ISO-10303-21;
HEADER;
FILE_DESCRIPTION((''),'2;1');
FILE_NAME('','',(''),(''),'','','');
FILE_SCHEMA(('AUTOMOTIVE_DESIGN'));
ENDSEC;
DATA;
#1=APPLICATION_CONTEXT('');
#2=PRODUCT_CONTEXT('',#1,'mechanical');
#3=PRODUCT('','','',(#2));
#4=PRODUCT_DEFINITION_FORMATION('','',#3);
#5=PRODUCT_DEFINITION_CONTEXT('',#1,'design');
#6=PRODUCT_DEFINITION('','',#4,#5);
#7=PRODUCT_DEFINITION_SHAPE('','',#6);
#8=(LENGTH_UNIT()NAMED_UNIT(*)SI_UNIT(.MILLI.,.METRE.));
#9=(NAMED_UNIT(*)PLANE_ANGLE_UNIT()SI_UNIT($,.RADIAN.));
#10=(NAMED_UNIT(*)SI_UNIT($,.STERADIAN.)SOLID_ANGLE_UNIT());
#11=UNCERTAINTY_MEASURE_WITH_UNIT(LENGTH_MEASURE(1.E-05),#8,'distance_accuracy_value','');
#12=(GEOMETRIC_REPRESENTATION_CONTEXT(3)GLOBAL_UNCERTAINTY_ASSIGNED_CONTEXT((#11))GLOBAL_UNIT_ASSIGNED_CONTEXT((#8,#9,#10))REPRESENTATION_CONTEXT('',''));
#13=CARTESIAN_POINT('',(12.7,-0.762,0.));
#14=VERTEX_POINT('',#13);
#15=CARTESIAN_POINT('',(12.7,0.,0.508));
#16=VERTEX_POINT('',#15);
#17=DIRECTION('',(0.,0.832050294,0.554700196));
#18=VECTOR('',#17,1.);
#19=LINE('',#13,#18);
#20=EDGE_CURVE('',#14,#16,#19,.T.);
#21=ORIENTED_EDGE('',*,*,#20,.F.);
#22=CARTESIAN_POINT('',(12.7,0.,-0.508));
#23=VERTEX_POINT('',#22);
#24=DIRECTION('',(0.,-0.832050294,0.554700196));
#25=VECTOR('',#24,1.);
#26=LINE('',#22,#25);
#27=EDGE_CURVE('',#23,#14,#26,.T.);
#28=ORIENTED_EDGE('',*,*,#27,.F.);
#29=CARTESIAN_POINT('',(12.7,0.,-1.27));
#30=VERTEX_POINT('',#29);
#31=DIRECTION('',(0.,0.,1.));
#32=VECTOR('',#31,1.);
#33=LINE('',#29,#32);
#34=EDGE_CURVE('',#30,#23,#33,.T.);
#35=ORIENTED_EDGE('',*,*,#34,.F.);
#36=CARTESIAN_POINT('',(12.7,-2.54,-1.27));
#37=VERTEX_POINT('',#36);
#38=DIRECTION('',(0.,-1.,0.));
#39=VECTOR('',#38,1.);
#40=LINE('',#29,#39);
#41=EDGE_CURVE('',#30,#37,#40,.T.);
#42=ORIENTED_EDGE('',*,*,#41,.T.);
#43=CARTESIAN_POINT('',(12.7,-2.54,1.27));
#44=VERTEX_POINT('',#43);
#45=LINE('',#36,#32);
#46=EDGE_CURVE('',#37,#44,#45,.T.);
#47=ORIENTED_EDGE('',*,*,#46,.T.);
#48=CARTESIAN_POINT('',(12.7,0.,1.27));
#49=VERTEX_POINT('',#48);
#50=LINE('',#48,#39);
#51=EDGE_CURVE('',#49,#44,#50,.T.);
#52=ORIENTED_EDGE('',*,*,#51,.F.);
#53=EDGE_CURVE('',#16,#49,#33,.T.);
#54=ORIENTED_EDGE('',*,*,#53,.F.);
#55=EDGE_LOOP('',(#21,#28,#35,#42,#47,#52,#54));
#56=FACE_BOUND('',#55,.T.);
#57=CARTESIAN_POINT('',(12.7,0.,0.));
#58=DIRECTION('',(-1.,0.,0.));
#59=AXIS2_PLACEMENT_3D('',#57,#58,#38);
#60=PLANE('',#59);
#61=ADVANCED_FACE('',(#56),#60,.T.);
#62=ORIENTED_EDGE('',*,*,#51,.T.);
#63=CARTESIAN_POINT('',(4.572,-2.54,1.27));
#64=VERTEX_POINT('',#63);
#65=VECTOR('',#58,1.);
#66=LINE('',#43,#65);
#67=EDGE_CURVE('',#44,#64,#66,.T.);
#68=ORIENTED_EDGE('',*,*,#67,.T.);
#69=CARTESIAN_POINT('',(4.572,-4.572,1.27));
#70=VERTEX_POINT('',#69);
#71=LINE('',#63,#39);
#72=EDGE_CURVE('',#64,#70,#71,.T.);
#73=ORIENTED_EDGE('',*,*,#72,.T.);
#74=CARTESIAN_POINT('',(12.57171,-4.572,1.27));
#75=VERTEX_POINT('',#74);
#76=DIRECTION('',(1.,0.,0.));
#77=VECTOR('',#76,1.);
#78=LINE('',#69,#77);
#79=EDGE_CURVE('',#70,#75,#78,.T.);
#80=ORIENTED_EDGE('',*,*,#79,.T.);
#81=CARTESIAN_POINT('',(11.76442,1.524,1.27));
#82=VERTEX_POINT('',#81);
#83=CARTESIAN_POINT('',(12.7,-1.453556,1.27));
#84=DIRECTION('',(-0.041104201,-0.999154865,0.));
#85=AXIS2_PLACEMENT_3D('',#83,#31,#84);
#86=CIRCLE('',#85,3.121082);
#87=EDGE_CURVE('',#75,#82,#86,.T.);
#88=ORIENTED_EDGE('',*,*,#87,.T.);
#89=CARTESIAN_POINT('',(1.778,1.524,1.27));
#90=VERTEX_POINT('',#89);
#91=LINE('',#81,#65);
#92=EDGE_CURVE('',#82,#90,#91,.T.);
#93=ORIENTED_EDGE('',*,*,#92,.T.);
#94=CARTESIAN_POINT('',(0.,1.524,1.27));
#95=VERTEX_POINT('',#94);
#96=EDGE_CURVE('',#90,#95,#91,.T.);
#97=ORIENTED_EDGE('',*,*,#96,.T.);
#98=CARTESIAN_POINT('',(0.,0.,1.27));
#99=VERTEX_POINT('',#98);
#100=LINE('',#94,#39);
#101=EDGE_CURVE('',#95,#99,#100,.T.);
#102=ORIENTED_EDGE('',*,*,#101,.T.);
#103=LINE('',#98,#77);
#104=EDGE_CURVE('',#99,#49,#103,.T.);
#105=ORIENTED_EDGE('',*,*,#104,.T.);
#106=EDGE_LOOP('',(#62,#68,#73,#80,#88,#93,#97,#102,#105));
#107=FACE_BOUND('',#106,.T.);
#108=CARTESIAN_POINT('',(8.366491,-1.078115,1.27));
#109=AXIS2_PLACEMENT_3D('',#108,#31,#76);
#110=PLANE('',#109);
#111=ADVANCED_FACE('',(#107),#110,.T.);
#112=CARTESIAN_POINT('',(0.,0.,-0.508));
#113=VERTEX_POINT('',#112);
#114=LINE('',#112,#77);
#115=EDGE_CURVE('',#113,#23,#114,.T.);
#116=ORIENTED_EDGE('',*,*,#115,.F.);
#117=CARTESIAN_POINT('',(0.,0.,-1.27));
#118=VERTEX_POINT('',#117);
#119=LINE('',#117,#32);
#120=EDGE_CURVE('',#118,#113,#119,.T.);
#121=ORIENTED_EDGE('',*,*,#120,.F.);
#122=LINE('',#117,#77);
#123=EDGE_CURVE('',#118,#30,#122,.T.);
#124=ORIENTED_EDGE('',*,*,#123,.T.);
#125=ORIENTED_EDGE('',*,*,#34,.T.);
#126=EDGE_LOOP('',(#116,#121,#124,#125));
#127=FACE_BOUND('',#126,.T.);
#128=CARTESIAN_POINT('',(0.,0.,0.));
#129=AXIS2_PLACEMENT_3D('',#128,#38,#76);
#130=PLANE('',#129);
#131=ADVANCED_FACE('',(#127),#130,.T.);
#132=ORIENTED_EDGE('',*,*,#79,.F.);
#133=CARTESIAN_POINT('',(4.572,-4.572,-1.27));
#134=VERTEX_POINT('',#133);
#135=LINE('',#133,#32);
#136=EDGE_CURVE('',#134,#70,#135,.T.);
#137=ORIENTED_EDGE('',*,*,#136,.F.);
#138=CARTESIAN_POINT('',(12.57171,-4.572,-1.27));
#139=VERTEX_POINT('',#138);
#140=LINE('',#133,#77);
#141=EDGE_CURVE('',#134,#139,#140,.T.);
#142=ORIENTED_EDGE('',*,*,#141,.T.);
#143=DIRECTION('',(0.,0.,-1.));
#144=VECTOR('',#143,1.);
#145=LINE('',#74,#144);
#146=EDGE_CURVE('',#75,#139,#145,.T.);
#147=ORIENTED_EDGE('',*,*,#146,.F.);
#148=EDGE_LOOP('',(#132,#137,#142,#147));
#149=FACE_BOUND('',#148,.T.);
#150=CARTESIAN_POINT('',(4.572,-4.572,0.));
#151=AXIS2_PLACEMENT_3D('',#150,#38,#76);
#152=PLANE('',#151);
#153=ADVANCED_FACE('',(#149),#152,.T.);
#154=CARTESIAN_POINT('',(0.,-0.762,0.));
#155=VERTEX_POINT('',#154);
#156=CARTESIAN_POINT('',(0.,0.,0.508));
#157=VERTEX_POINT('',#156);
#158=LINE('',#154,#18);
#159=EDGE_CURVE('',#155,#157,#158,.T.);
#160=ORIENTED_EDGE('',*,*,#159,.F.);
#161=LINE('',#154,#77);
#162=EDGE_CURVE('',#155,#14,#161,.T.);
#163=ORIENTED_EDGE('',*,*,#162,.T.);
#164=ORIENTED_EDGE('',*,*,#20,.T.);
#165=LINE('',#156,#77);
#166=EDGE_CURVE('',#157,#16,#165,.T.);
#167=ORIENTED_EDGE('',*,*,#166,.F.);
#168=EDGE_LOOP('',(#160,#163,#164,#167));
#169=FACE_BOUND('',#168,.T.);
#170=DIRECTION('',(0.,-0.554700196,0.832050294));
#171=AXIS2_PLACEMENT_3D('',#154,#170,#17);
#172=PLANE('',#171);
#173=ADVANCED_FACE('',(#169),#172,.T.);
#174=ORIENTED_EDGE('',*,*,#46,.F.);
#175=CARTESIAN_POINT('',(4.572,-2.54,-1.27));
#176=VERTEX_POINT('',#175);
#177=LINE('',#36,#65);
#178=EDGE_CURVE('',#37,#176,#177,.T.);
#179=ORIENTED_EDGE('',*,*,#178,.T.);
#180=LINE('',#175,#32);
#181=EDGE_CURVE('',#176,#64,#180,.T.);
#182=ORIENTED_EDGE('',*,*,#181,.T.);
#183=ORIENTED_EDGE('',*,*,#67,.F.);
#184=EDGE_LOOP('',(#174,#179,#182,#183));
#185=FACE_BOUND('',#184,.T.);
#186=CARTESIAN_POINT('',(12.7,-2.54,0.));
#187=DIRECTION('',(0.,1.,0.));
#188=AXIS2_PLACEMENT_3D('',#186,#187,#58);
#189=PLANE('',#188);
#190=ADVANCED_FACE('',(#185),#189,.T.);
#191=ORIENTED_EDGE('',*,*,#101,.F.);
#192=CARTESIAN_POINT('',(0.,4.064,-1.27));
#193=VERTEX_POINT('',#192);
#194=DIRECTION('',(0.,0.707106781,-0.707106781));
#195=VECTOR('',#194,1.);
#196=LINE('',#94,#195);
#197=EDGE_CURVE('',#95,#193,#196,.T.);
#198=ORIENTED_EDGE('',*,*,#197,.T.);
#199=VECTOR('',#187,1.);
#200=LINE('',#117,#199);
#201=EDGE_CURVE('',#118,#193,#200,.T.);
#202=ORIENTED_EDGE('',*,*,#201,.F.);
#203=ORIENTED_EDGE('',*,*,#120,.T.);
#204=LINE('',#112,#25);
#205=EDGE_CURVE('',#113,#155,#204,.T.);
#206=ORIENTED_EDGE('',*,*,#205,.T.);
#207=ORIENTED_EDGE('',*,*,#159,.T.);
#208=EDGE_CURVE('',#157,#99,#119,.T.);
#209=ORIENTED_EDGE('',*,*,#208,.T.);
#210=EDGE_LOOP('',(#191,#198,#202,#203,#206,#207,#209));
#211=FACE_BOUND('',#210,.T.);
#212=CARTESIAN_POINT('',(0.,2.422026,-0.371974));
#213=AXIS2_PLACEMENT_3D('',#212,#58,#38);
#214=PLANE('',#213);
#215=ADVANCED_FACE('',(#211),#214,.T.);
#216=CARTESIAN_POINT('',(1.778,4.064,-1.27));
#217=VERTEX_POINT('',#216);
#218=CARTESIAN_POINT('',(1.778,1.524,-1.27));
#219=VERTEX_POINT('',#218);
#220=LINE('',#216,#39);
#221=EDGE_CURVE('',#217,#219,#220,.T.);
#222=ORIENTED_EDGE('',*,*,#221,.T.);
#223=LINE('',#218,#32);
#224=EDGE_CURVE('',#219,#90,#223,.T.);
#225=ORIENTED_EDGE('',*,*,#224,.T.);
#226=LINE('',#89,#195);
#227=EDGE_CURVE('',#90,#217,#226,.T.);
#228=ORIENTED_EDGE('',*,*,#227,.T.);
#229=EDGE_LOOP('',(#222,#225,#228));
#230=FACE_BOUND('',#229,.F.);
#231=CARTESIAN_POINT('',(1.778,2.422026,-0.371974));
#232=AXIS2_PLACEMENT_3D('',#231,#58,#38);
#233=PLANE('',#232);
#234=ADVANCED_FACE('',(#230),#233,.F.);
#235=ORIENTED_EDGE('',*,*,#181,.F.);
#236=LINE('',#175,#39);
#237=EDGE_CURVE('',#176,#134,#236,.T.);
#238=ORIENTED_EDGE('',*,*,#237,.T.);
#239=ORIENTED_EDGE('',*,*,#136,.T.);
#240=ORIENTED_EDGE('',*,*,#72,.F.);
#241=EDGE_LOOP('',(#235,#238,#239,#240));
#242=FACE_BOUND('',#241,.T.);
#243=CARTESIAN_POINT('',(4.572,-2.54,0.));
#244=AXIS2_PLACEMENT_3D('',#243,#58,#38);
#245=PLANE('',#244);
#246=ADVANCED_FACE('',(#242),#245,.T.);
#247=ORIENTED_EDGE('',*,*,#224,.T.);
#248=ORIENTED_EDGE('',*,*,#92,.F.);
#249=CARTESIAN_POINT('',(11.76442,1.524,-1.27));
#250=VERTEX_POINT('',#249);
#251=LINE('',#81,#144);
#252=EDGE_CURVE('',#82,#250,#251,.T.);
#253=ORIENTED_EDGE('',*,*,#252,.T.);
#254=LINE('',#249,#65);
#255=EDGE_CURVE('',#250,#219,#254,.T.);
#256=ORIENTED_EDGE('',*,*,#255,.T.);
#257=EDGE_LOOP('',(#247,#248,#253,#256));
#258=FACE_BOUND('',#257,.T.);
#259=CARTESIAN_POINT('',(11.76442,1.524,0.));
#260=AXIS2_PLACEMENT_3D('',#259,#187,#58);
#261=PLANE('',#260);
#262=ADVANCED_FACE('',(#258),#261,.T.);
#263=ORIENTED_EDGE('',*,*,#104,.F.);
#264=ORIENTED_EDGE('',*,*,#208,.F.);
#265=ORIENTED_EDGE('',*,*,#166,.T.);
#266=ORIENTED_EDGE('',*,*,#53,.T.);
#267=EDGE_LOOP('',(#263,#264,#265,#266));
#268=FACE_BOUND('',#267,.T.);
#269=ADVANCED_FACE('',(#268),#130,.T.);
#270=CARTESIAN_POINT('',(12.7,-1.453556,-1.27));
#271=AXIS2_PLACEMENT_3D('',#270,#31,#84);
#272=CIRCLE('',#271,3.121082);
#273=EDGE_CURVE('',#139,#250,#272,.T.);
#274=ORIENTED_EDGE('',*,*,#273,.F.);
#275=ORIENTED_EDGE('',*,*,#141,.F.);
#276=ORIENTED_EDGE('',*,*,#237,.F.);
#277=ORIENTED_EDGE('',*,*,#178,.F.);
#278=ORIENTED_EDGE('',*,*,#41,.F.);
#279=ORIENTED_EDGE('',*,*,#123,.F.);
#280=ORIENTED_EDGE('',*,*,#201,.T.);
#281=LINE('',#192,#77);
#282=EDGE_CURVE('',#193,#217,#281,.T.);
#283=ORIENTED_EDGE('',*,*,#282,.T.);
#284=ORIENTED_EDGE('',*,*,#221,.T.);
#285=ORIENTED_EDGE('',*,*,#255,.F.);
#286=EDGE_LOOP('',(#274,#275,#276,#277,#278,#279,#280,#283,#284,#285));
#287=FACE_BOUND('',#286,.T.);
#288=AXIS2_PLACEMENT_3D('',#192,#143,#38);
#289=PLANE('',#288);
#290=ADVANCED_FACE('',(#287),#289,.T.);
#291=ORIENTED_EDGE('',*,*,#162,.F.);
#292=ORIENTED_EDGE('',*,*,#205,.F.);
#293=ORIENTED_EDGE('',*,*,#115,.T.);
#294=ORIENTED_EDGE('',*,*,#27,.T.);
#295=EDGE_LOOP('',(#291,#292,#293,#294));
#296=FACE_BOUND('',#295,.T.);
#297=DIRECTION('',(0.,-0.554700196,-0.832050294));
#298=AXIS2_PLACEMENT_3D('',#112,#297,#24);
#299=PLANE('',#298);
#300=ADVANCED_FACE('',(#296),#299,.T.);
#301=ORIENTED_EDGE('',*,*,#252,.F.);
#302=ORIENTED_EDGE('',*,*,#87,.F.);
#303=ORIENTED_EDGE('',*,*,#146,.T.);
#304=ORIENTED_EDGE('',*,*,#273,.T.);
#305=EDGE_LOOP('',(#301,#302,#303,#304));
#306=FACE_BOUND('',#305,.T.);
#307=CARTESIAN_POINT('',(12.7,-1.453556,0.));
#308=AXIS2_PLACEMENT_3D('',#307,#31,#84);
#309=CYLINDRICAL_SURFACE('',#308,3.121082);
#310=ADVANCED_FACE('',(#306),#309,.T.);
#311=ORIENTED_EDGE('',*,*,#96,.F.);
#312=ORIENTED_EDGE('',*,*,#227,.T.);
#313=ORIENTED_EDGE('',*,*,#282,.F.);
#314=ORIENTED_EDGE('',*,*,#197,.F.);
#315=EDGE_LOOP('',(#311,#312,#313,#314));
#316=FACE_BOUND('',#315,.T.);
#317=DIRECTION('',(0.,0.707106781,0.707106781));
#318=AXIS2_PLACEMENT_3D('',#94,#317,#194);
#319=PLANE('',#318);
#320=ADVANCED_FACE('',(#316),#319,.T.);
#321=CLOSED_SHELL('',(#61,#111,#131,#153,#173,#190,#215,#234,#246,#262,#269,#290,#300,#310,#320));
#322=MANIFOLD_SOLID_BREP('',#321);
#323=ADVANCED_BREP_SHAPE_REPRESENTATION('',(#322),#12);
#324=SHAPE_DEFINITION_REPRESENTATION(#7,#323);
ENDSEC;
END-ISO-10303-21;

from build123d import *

# Parameters (mm, degrees)
F1_DEPTH = 1.27
F3_DEPTH = 12.7
F6_DEPTH = 1.778


with BuildPart() as f1:
    # F0 (on Top) → F1 (new body, symmetric)
    with BuildSketch(Plane.XY):
        with BuildLine():
            Line((0, 1.524), (0, 0))
            Line((0, 0), (12.7, 0))
            Line((12.7, 0), (12.7, -2.54))
            Line((12.7, -2.54), (4.572, -2.54))
            Line((4.572, -2.54), (4.572, -4.572))
            Line((4.572, -4.572), (12.5717104354, -4.572))
            ThreePointArc((12.5717104354, -4.572), (15.7940682602, -1.0438103752), (11.7644204026, 1.524))
            Line((11.7644204026, 1.524), (0, 1.524))
        make_face()
    extrude(amount=F1_DEPTH, both=True)

    # F2 (on face) → F3 (join, through all)
    with BuildSketch(Plane(origin=(0, 0, 0), x_dir=(0, -1, 0), z_dir=(-1, 0, 0))):
        Polygon((0.762, 0), (0, 0.508), (0, -0.508), align=None)
    extrude(amount=-F3_DEPTH)

    # F5 (on face) → F6 (join)
    with BuildSketch(Plane(origin=(0, 0, 0), x_dir=(0, -1, 0), z_dir=(-1, 0, 0))):
        Polygon((-4.064, -1.27), (-1.524, -1.27), (-1.524, 1.27), align=None)
    extrude(amount=-F6_DEPTH)


with BuildPart() as f7_1:
    # F7: copy of F1
    add(f1.part)


solid = f1.part
